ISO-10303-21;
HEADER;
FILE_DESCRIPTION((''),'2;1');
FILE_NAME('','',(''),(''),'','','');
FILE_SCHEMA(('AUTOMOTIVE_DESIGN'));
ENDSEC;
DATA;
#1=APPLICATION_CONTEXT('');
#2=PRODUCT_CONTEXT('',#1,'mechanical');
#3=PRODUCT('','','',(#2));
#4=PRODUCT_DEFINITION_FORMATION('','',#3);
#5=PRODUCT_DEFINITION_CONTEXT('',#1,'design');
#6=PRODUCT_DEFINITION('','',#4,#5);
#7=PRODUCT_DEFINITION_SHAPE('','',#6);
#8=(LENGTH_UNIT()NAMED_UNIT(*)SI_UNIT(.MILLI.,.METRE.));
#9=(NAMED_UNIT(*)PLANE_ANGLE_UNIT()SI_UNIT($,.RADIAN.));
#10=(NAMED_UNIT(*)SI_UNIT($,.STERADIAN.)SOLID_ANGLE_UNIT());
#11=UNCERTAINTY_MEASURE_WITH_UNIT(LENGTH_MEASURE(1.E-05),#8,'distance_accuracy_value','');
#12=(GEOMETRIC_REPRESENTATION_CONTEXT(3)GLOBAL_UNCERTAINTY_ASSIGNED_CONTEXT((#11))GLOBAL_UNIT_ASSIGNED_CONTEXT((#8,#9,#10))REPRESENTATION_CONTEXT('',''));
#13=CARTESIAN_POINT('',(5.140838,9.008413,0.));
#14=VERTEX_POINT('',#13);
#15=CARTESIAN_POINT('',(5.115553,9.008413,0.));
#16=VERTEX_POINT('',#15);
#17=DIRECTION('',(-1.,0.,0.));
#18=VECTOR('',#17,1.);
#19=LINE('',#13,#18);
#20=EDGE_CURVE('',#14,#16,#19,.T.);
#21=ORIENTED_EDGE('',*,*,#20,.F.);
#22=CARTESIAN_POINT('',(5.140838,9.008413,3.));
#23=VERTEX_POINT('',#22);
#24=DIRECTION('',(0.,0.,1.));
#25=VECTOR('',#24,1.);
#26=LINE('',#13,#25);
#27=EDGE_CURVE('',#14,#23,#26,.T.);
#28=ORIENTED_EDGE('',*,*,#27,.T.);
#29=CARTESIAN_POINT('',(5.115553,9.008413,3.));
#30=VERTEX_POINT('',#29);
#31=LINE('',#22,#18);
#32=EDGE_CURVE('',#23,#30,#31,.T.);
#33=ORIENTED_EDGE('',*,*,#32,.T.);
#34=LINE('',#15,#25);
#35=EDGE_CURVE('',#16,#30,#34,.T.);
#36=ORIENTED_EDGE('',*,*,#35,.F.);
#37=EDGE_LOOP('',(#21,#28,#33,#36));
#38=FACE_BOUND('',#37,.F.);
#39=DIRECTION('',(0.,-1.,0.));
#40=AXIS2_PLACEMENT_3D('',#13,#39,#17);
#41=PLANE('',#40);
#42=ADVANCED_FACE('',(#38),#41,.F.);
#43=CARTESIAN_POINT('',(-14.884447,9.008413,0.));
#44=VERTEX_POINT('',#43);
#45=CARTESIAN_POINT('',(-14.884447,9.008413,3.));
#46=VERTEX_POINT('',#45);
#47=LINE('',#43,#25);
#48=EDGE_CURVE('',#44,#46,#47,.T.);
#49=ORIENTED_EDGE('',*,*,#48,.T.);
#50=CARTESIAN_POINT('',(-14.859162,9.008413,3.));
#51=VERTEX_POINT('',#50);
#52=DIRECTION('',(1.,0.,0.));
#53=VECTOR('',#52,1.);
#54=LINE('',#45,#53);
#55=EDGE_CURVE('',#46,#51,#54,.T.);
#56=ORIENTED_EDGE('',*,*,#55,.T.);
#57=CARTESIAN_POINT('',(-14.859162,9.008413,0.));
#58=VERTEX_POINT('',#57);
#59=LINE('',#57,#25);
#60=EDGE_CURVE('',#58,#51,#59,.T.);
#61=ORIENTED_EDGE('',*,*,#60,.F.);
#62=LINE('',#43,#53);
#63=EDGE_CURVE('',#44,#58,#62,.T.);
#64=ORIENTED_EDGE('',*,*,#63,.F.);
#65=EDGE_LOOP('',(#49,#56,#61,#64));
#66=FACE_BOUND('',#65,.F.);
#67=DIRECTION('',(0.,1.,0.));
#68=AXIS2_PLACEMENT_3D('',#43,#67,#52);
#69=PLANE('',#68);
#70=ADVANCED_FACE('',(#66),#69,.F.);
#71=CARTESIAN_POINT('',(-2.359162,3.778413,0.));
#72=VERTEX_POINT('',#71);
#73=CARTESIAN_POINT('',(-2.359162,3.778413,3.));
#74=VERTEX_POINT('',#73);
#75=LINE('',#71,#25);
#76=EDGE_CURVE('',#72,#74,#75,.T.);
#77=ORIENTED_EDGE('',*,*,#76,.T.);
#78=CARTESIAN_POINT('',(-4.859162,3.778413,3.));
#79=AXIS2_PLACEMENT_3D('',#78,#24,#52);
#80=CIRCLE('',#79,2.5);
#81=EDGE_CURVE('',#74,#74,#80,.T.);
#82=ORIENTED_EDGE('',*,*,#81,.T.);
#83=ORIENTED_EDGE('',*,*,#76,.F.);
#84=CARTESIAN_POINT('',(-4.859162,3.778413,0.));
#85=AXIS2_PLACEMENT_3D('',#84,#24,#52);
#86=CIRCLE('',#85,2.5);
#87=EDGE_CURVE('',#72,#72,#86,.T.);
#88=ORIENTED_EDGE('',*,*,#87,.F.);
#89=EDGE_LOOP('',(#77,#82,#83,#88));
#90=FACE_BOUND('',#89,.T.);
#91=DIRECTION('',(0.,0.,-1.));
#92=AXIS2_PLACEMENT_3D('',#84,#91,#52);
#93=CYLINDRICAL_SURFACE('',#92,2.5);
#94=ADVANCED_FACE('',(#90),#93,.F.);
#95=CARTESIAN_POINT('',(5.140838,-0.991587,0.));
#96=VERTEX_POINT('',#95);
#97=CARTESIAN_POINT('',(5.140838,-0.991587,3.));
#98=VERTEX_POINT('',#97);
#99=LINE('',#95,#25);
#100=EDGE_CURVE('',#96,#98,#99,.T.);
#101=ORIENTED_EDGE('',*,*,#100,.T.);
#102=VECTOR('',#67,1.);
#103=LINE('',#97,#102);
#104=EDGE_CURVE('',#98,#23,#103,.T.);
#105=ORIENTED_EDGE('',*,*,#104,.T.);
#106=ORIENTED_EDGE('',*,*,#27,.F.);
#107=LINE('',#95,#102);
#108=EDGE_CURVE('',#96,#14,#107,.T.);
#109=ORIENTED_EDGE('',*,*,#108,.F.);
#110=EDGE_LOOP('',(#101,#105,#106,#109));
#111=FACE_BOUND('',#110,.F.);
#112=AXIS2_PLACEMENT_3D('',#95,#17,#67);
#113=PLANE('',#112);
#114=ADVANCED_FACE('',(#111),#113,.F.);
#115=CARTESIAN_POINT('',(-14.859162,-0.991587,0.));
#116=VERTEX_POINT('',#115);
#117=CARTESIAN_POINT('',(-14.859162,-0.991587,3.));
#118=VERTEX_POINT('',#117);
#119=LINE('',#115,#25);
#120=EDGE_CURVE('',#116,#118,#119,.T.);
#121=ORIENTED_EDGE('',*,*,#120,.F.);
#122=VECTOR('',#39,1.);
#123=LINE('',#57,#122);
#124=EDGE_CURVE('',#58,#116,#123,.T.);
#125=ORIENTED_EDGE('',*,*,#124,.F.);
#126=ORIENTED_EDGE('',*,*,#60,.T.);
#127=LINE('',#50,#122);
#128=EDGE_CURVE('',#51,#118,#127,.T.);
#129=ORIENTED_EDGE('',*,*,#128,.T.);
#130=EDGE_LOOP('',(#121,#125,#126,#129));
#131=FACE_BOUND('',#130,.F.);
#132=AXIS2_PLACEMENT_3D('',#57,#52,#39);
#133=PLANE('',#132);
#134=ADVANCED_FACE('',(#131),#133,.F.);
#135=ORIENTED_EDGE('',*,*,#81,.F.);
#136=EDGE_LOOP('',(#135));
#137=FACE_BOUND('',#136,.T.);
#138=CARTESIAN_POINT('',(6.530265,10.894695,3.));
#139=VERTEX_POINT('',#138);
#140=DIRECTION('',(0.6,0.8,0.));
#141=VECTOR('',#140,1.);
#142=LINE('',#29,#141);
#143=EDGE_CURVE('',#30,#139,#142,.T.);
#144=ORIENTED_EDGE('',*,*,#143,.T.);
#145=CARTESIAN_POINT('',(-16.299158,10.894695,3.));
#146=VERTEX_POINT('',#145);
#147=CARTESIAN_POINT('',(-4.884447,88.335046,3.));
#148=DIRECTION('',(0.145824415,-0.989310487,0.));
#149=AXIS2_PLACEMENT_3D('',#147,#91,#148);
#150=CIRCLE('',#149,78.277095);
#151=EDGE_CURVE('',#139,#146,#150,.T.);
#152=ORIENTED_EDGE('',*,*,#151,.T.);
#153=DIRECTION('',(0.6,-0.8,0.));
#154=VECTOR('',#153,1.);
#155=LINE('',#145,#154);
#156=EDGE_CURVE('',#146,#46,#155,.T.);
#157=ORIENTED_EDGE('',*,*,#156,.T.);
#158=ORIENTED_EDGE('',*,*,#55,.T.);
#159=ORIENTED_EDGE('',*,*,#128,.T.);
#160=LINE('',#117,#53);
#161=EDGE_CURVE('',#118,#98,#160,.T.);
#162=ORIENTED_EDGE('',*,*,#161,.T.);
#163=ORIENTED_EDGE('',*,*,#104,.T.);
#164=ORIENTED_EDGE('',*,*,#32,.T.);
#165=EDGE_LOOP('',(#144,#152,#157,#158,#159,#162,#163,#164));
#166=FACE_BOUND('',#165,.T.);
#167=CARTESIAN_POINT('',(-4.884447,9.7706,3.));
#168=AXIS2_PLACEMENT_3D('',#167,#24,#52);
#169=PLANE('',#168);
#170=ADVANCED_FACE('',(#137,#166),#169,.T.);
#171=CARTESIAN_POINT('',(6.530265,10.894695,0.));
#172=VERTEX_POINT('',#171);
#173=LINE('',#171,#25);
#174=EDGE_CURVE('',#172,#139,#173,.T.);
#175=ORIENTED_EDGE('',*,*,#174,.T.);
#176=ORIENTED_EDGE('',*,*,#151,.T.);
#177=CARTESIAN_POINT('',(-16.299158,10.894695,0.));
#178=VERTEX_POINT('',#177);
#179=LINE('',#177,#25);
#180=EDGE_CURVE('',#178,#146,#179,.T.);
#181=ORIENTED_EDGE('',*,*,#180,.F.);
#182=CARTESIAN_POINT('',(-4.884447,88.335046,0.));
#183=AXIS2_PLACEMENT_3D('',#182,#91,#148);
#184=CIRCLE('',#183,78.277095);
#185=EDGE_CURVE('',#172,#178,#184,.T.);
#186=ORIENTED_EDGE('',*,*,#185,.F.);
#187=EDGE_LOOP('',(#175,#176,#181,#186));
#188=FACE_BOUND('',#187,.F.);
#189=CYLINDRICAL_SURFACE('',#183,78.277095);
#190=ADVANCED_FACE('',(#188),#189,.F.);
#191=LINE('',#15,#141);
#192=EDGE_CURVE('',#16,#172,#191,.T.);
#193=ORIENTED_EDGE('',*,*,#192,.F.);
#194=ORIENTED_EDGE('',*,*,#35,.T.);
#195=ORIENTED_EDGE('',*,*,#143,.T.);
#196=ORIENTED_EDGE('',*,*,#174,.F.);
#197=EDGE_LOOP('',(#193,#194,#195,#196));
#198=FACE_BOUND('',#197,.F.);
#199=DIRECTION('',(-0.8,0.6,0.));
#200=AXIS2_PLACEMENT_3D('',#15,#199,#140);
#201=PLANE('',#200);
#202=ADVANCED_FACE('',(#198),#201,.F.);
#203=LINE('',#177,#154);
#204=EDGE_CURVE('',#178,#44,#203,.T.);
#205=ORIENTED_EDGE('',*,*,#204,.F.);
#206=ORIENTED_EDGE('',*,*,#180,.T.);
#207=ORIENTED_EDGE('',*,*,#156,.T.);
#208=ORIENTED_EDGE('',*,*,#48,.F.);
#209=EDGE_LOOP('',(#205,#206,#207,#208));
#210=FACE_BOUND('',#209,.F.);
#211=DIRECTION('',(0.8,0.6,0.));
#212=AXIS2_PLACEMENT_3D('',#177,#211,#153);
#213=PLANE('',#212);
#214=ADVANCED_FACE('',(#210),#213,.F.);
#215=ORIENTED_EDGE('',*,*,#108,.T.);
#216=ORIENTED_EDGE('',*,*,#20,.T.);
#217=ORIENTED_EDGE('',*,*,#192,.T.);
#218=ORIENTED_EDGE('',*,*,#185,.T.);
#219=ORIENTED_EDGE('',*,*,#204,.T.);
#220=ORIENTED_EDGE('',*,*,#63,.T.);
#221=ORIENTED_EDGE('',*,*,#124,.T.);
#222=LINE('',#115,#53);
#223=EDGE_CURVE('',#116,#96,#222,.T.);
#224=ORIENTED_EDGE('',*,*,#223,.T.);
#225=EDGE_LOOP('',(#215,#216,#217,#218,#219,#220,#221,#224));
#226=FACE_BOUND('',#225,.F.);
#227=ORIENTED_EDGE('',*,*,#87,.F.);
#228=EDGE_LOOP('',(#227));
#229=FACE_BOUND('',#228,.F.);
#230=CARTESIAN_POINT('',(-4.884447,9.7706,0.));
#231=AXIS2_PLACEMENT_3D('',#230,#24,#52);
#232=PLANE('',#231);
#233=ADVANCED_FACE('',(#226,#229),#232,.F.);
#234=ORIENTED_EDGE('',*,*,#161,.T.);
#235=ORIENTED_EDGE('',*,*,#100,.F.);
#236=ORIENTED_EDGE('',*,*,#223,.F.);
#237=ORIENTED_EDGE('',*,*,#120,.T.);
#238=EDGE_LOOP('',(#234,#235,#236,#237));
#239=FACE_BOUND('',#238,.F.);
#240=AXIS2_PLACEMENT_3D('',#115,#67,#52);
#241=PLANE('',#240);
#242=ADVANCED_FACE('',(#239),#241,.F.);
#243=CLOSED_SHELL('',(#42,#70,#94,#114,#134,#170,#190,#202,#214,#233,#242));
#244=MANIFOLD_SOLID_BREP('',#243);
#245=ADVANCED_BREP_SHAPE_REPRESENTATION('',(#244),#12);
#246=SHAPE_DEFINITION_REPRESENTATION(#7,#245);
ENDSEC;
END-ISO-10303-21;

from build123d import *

# Parameters (mm, degrees)
F0_R     = 2.5
F1_DEPTH = 3


# Not quite as in the source:
# - a feature names something its author has since deleted; it is built from what else it names


with BuildPart() as f1:
    # F0 (on Top) → F1 (new body)
    with BuildSketch(Plane.XY):
        with BuildLine():
            Line((-14.8844467476, 9.0084131807), (-14.8591619832, 9.0084131807))
            Line((-14.8591619832, 9.0084131807), (5.1155532524, 9.0084131807))
            Line((5.1155532524, 9.0084131807), (6.5302648152, 10.8946952644))
            ThreePointArc((6.5302648152, 10.8946952644), (-4.8844467476, 10.0579512552), (-16.2991583104, 10.8946952644))
            Line((-16.2991583104, 10.8946952644), (-14.8844467476, 9.0084131807))
        make_face()
        Polygon((5.1155532524, 9.0084131807), (-14.8591619832, 9.0084131807), (-14.8591619832, -0.9915868193), (5.1408380168, -0.9915868193), (5.1408380168, 9.0084131807), align=None)
        with Locations((-4.8591619832, 3.7784131807)):
            Circle(F0_R, mode=Mode.SUBTRACT)
    extrude(amount=F1_DEPTH)


solid = f1.part
